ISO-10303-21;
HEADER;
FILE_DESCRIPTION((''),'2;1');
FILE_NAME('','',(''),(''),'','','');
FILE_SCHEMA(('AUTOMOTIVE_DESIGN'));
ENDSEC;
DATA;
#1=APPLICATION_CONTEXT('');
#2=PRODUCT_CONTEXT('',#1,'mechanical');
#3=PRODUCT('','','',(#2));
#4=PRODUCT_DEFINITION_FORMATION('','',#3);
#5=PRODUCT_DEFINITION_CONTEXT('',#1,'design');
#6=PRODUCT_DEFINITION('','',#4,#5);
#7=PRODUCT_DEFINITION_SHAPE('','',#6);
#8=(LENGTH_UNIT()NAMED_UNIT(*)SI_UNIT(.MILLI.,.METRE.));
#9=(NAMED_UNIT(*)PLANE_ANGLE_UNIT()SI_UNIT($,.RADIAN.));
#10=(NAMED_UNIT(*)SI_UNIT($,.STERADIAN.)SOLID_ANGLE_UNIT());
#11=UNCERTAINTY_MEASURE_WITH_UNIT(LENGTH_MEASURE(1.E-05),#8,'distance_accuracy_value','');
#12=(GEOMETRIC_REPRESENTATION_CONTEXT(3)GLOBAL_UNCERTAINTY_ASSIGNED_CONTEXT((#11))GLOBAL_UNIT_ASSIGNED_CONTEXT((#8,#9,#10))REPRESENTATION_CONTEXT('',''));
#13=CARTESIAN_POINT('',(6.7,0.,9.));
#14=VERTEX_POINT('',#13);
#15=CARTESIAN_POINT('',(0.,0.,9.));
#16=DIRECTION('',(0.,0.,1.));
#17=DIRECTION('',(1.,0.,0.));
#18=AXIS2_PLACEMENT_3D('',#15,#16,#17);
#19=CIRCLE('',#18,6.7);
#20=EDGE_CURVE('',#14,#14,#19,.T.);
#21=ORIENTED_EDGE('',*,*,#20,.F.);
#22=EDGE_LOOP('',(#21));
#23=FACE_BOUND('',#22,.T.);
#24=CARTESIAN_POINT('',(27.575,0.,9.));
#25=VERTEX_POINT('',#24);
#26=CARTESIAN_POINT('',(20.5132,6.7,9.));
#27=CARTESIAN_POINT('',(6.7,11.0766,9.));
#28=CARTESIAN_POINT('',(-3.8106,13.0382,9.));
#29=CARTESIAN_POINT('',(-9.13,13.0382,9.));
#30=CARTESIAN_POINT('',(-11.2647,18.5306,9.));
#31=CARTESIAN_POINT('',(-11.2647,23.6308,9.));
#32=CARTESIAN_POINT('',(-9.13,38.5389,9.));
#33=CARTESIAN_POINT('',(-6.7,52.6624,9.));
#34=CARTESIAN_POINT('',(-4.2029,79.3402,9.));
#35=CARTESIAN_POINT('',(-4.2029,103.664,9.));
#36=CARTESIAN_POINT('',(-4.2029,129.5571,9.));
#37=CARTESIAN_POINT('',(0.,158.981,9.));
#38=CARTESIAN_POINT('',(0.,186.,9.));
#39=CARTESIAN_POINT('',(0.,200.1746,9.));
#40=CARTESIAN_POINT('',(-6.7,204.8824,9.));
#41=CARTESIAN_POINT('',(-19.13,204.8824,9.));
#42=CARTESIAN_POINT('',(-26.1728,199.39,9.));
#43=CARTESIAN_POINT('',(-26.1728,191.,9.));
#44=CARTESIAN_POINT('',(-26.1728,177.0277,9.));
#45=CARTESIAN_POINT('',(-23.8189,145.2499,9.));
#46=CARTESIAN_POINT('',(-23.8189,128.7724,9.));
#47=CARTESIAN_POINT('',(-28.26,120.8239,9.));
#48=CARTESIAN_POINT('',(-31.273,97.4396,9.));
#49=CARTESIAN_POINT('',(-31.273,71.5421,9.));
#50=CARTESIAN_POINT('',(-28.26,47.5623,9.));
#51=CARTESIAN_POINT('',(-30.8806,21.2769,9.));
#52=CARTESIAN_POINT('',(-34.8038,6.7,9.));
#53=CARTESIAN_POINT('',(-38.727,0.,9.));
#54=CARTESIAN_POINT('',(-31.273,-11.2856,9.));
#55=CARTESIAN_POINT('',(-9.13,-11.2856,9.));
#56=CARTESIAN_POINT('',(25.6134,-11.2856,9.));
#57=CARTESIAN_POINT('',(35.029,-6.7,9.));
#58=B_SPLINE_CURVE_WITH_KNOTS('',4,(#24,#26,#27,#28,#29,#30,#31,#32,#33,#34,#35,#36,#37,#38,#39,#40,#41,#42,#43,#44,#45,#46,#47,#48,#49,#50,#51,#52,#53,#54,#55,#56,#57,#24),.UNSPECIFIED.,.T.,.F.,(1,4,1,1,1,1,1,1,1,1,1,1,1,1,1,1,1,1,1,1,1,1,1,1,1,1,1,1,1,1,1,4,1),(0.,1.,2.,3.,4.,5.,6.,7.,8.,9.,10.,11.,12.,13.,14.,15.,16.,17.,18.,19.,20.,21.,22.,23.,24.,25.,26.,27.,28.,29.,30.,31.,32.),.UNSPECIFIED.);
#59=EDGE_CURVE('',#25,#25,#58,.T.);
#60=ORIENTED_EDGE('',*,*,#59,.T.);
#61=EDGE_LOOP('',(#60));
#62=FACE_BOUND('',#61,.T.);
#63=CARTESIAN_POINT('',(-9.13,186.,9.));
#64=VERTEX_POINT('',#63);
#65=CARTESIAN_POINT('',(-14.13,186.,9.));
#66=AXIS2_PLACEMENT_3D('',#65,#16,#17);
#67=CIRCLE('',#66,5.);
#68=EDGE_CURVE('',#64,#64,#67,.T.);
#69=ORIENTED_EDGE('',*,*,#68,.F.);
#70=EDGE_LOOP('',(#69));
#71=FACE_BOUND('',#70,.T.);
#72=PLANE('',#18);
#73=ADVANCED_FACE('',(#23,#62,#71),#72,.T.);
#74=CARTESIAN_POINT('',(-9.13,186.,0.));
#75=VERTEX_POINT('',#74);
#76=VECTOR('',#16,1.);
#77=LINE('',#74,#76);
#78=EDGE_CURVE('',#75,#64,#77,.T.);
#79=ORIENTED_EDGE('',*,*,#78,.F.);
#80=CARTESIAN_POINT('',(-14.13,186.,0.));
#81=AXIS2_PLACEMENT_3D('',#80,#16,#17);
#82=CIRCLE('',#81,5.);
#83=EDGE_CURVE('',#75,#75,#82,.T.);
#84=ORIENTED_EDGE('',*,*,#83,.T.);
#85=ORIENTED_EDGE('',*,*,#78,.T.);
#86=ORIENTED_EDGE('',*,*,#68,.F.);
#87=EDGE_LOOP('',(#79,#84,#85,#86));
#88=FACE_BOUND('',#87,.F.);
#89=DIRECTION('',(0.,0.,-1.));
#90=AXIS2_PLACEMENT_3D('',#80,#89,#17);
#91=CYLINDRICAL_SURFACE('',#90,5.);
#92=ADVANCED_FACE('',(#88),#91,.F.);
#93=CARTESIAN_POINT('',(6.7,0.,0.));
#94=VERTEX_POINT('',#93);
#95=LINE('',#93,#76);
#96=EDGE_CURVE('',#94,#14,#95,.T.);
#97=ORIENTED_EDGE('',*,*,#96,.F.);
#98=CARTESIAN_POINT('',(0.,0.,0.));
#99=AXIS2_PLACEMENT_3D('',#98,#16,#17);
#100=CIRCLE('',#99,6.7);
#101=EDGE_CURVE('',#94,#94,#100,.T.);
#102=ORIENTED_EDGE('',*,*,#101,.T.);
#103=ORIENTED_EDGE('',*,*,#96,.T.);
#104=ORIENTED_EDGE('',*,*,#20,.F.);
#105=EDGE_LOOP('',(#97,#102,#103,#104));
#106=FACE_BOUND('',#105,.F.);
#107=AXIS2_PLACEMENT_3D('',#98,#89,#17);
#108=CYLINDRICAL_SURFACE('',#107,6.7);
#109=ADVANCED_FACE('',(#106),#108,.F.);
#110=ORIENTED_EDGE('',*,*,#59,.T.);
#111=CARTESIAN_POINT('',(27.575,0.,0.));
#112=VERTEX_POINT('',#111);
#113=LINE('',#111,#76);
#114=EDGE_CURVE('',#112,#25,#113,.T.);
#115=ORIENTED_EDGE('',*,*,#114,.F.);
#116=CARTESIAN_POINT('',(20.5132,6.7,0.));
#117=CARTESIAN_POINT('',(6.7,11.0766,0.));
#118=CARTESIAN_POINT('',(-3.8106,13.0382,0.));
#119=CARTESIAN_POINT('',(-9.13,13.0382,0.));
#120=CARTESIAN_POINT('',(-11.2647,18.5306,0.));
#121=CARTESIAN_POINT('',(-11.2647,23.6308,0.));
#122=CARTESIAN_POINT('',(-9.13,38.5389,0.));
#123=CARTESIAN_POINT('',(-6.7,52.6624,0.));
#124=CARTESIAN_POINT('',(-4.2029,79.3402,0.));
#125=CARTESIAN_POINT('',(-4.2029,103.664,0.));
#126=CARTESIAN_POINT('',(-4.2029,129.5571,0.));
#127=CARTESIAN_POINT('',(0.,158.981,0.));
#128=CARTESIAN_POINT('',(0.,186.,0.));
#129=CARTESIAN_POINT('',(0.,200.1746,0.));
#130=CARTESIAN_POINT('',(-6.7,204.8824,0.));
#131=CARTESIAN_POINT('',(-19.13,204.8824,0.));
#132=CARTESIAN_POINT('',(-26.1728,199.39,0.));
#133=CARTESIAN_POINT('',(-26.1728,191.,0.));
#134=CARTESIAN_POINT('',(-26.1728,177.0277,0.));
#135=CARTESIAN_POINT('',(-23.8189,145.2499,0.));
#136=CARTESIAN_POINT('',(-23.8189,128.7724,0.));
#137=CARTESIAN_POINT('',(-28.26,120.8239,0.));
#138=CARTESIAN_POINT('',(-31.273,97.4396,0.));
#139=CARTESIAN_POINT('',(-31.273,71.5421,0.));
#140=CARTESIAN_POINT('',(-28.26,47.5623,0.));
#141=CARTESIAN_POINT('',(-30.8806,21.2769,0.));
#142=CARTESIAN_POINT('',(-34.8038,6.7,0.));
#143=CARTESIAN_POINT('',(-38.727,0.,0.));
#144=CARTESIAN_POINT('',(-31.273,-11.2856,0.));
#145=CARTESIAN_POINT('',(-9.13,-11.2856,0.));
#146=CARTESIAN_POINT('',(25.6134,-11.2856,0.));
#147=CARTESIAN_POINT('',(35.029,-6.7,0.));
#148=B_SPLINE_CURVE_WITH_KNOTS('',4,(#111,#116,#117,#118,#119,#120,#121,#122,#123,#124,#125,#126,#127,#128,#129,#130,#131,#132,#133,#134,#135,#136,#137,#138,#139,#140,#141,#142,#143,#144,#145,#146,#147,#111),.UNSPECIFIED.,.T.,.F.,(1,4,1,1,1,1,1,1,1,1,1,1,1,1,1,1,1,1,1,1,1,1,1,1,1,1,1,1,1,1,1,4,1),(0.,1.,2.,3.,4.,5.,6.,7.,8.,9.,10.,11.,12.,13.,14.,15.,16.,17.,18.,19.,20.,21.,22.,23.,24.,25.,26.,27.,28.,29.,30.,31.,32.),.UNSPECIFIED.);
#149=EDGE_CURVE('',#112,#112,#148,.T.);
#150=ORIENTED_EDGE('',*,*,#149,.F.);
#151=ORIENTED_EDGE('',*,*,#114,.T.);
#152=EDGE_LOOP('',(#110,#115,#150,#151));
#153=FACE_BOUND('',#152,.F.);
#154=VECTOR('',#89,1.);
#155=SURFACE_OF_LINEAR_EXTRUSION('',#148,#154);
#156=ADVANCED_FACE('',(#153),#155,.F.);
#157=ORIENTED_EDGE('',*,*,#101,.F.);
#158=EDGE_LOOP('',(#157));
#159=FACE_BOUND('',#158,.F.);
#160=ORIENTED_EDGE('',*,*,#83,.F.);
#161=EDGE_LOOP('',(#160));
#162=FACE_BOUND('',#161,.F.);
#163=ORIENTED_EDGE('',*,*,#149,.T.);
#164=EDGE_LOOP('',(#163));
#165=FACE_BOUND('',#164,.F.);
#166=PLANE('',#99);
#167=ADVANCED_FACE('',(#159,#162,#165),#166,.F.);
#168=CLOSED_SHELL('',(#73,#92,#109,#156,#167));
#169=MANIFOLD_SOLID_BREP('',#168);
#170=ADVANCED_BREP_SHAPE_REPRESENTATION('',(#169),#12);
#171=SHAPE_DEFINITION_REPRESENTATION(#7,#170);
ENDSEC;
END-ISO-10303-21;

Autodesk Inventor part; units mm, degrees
ref_plane "YZ Plane" through (0, 0, 0) normal (1, 0, 0) x (0, 1, 0)
ref_plane "XZ Plane" through (0, 0, 0) normal (0, 1, 0) x (-1, 0, 0)
ref_plane "XY Plane" through (0, 0, 0) normal (0, 0, 1) x (1, 0, 0)
sketch "Sketch1" plane through (0, 0, 0) normal (0, 0, 1) x (1, 0, 0)
  circle A0 centre (0, 0) radius 6.7
  line L0 (0, 0) -> (-28.26, 0) construction
  line L1 (-28.26, 0) -> (-28.26, 186) construction
  line L2 (-28.26, 186) -> (-14.13, 186) construction
  circle A1 centre (-14.13, 186) radius 5
  line L3 (27.575, 0) -> (20.5132, 6.7) construction
  line L4 (20.5132, 6.7) -> (6.7, 11.0766) construction
  line L5 (6.7, 11.0766) -> (-3.8106, 13.0382) construction
  line L6 (-3.8106, 13.0382) -> (-9.13, 13.0382) construction
  line L7 (-9.13, 13.0382) -> (-11.2647, 18.5306) construction
  line L8 (-11.2647, 18.5306) -> (-11.2647, 23.6308) construction
  line L9 (-11.2647, 23.6308) -> (-9.13, 38.5389) construction
  line L10 (-9.13, 38.5389) -> (-6.7, 52.6624) construction
  line L11 (-6.7, 52.6624) -> (-4.2029, 79.3402) construction
  line L12 (-4.2029, 79.3402) -> (-4.2029, 103.664) construction
  line L13 (-4.2029, 103.664) -> (-4.2029, 129.5571) construction
  line L14 (-4.2029, 129.5571) -> (0, 158.981) construction
  line L15 (0, 158.981) -> (0, 186) construction
  line L16 (0, 186) -> (0, 200.1746) construction
  line L17 (0, 200.1746) -> (-6.7, 204.8824) construction
  line L18 (-6.7, 204.8824) -> (-19.13, 204.8824) construction
  line L19 (-19.13, 204.8824) -> (-26.1728, 199.39) construction
  line L20 (-26.1728, 199.39) -> (-26.1728, 191) construction
  line L21 (-26.1728, 191) -> (-26.1728, 177.0277) construction
  line L22 (-26.1728, 177.0277) -> (-23.8189, 145.2499) construction
  line L23 (-23.8189, 145.2499) -> (-23.8189, 128.7724) construction
  line L24 (-23.8189, 128.7724) -> (-28.26, 120.8239) construction
  line L25 (-28.26, 120.8239) -> (-31.273, 97.4396) construction
  line L26 (-31.273, 97.4396) -> (-31.273, 71.5421) construction
  line L27 (-31.273, 71.5421) -> (-28.26, 47.5623) construction
  line L28 (-28.26, 47.5623) -> (-30.8806, 21.2769) construction
  line L29 (-30.8806, 21.2769) -> (-34.8038, 6.7) construction
  line L30 (-34.8038, 6.7) -> (-38.727, 0) construction
  line L31 (-38.727, 0) -> (-31.273, -11.2856) construction
  line L32 (-31.273, -11.2856) -> (-9.13, -11.2856) construction
  line L33 (-9.13, -11.2856) -> (25.6134, -11.2856) construction
  line L34 (25.6134, -11.2856) -> (35.029, -6.7) construction
  line L35 (35.029, -6.7) -> (27.575, 0) construction
  spline S0 degree 4 poles (27.575, 0) (20.5132, 6.7) (6.7, 11.0766) (-3.8106, 13.0382) (-9.13, 13.0382) (-11.2647, 18.5306) (-11.2647, 23.6308) (-9.13, 38.5389) (-6.7, 52.6624) (-4.2029, 79.3402) (-4.2029, 103.664) (-4.2029, 129.5571) (0, 158.981) (0, 186) (0, 200.1746) (-6.7, 204.8824) (-19.13, 204.8824) (-26.1728, 199.39) (-26.1728, 191) (-26.1728, 177.0277) (-23.8189, 145.2499) (-23.8189, 128.7724) (-28.26, 120.8239) (-31.273, 97.4396) (-31.273, 71.5421) (-28.26, 47.5623) (-30.8806, 21.2769) (-34.8038, 6.7) (-38.727, 0) (-31.273, -11.2856) (-9.13, -11.2856) (25.6134, -11.2856) (35.029, -6.7) (27.575, 0) knots 1 1 1 1 1 2 3 4 5 6 7 8 9 10 11 12 13 14 15 16 17 18 19 20 21 22 23 24 25 26 27 28 29 30 31 31 31 31 31
  dimension "d0" = 13.4
  dimension "d1" = 28.26
  dimension "d2" = 186
  dimension "d3" = 10
extrude "Extrusion1" add sketch "Sketch1" along normal blind 9
properties part number "pierna"
